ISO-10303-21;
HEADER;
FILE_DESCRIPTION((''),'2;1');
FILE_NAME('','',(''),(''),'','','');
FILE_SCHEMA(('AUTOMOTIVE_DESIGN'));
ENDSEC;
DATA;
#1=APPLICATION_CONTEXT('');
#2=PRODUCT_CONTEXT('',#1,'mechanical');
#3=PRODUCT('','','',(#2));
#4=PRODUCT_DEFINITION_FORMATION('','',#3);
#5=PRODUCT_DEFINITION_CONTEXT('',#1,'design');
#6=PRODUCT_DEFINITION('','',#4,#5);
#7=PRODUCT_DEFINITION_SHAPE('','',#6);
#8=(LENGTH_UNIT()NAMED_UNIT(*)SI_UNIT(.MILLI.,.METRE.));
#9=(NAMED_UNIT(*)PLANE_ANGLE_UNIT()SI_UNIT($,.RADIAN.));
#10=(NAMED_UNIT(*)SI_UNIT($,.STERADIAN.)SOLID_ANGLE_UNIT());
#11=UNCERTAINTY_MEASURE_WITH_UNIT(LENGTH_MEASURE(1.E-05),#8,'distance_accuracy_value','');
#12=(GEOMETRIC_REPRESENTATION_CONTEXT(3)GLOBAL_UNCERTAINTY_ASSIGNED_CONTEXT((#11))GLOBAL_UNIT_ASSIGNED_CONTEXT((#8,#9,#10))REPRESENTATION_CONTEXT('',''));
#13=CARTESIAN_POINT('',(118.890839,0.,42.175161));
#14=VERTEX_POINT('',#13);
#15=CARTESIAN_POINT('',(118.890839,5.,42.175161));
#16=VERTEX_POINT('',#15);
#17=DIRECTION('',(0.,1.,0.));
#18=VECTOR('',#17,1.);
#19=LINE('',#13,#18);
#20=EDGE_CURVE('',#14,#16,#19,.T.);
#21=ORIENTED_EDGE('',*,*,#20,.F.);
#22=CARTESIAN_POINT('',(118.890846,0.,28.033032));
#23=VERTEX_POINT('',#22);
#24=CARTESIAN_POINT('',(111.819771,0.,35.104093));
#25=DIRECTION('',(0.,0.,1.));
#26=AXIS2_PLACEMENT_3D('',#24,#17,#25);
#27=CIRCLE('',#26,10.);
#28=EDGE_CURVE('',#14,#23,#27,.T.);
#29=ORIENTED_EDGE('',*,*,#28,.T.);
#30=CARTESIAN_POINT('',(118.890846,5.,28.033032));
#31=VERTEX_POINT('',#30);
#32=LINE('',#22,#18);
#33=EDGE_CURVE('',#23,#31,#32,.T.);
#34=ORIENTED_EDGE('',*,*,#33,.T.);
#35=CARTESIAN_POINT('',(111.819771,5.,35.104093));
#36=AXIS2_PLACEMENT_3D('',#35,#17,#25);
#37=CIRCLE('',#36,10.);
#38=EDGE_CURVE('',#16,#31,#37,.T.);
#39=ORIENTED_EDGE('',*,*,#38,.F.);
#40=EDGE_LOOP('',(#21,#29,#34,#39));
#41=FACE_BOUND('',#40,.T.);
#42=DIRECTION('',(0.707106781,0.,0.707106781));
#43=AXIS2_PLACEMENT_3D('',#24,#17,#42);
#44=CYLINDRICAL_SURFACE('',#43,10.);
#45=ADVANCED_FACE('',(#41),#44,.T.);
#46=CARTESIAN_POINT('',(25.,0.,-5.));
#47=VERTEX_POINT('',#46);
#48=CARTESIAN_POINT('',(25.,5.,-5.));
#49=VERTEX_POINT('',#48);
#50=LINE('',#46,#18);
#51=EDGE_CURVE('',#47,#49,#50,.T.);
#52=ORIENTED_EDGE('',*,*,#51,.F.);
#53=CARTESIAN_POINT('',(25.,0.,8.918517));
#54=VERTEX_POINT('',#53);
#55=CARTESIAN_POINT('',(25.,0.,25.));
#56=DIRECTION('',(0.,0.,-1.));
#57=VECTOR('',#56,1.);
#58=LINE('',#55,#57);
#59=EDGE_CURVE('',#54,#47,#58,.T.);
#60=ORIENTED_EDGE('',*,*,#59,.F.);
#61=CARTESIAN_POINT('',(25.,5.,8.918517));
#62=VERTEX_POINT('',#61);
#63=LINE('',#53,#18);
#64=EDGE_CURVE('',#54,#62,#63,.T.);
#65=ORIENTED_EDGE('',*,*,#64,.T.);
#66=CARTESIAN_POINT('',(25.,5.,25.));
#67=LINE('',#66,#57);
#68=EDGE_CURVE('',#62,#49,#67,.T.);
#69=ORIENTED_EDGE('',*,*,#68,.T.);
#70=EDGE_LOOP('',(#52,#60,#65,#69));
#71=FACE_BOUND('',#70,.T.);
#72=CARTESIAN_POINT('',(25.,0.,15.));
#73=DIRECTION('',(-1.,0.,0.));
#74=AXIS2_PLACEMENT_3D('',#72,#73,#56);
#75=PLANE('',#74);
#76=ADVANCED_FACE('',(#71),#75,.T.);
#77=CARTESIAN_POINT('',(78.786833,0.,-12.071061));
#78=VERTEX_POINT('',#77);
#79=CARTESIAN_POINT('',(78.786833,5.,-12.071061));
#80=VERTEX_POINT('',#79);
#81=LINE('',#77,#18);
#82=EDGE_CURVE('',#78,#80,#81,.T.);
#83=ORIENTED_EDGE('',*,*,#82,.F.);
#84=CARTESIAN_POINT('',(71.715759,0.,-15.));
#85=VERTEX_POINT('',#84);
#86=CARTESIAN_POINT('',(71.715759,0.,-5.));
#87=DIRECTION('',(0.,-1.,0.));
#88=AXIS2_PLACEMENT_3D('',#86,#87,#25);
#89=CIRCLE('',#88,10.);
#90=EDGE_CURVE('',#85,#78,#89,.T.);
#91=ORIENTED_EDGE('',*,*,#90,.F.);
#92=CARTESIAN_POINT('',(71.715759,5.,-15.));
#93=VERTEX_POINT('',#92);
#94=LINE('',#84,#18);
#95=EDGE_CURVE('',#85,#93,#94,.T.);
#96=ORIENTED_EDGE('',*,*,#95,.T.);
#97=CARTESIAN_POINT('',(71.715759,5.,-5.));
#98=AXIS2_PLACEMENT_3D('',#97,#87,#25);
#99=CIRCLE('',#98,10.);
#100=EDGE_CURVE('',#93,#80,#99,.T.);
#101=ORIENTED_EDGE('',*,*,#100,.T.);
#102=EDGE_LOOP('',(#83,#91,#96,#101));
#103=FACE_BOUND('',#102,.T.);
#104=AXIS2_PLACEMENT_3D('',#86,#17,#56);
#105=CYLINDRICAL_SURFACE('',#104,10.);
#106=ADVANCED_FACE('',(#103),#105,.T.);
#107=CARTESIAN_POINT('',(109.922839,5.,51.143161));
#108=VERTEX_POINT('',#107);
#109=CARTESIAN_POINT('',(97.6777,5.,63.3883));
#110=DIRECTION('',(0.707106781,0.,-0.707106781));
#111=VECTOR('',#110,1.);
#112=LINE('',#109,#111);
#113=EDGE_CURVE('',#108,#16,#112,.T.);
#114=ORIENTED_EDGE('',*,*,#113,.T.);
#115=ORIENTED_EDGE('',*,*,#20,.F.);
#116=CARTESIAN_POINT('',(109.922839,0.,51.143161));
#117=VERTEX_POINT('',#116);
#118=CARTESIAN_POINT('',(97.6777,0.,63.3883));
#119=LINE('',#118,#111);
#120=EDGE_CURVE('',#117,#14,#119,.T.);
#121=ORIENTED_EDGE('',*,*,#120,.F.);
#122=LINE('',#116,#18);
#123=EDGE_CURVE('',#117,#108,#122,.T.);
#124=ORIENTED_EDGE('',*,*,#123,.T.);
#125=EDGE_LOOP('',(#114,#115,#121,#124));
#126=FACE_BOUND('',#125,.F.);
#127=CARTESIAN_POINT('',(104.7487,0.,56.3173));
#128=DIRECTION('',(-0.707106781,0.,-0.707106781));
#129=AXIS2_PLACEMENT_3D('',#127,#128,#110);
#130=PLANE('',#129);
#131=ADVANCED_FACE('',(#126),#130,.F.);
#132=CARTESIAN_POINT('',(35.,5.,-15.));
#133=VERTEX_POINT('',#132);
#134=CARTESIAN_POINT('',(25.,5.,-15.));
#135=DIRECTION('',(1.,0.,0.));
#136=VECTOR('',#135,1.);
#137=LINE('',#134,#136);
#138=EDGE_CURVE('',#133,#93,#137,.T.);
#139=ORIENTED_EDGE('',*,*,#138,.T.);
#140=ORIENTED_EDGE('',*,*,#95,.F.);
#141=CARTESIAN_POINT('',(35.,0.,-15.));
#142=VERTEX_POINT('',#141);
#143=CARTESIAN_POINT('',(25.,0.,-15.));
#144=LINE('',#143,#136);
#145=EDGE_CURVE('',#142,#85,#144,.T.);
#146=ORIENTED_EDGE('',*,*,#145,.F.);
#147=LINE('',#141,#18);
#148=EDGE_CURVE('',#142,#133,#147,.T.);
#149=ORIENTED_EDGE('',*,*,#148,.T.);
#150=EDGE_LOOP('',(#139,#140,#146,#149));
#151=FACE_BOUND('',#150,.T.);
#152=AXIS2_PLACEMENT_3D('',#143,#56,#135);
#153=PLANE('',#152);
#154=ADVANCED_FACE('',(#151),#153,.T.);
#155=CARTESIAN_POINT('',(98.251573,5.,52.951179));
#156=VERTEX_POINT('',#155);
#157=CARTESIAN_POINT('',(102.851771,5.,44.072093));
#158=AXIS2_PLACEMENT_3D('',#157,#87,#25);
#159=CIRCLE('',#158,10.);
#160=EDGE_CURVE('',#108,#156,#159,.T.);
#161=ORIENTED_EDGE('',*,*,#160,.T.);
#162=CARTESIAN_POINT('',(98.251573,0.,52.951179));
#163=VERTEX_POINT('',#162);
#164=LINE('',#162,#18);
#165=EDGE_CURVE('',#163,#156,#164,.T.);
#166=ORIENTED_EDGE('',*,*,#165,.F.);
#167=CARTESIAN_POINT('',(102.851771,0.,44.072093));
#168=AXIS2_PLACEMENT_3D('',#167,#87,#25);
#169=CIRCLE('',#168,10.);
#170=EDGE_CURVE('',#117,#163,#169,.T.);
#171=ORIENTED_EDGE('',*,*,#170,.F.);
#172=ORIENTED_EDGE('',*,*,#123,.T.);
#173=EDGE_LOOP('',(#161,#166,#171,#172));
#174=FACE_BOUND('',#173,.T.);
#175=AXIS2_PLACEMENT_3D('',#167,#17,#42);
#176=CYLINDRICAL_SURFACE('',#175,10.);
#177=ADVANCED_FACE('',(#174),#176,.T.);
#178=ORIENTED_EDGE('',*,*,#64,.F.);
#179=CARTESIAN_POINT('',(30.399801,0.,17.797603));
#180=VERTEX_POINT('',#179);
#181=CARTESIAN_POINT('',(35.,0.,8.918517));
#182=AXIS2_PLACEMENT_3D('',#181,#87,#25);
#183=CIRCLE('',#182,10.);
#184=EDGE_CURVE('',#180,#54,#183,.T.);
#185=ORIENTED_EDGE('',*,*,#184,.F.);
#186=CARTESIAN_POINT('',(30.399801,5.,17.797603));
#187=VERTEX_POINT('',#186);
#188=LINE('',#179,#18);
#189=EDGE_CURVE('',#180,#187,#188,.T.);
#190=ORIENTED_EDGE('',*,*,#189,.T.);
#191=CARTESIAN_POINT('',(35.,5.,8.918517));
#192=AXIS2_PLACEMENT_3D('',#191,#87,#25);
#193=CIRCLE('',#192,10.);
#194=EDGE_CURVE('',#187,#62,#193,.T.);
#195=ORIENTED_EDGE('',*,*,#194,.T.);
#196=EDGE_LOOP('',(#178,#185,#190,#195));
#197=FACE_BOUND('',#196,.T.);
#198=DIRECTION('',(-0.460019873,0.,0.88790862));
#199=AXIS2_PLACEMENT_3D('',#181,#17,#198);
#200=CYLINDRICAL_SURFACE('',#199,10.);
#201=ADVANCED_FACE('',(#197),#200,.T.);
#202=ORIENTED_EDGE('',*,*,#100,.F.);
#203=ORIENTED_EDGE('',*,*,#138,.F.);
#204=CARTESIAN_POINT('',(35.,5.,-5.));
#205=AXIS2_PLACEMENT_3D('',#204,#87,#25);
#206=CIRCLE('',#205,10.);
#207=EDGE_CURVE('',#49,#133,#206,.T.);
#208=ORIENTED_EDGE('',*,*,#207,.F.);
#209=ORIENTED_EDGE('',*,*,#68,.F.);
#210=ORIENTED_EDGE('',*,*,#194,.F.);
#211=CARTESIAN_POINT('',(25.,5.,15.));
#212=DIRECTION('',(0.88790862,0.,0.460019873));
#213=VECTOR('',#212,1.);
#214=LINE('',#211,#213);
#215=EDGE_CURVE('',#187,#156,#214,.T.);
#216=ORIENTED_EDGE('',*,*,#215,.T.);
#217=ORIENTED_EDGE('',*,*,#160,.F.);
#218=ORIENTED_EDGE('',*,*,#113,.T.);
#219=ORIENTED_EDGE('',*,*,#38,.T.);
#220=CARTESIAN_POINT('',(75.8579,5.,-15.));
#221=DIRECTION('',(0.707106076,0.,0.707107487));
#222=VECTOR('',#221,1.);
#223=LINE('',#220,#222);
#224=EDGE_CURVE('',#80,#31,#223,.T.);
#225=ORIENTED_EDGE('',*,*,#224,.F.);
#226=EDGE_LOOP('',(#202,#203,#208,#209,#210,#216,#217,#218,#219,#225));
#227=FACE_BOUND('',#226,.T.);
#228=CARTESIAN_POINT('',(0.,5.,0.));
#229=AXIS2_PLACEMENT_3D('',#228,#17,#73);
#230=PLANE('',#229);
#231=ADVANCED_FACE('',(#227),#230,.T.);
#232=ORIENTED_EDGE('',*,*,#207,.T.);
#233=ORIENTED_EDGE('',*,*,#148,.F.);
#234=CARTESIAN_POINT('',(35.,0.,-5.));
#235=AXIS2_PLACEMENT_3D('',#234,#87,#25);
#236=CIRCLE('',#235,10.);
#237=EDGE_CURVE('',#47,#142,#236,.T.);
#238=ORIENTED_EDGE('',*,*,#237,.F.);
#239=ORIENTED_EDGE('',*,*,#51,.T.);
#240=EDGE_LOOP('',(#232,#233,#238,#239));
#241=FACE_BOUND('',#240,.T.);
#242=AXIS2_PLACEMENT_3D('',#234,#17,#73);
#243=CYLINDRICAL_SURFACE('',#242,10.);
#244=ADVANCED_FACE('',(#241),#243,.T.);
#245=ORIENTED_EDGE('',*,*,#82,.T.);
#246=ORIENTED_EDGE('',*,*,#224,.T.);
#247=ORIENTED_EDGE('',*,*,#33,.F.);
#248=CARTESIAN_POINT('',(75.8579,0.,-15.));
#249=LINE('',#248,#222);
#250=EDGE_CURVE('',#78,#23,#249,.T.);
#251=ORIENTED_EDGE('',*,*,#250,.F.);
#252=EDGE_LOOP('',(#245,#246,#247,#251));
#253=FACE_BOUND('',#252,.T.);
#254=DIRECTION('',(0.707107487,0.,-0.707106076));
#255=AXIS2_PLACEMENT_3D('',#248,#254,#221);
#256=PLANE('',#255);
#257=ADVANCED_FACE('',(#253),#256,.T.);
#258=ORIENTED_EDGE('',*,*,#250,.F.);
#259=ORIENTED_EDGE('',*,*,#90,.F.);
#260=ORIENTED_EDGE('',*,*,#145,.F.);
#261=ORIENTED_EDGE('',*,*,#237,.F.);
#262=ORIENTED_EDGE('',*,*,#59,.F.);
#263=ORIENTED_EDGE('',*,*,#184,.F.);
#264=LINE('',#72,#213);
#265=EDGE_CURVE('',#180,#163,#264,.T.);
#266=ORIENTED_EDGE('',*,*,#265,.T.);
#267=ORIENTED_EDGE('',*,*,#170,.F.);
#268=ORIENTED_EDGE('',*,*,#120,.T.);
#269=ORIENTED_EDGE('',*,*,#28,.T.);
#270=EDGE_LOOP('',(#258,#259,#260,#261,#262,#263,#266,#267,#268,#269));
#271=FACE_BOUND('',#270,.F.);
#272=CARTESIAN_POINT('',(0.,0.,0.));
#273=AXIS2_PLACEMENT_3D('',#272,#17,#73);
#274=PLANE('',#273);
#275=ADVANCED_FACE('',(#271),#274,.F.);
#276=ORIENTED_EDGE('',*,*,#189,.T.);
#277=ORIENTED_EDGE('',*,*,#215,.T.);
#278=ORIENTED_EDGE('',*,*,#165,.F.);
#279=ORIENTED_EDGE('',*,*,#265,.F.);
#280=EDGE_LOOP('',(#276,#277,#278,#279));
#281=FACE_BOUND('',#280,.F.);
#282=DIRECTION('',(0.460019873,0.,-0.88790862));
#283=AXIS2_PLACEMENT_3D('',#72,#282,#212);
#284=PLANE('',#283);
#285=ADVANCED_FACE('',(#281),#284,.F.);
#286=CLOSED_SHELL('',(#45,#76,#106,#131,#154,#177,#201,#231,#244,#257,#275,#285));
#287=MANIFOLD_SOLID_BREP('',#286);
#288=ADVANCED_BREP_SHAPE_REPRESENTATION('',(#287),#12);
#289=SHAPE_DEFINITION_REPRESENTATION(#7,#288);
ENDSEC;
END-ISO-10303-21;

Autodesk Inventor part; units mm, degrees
ref_plane "YZ Plane" through (0, 0, 0) normal (1, 0, 0) x (0, 1, 0)
ref_plane "XZ Plane" through (0, 0, 0) normal (0, 1, 0) x (-1, 0, 0)
ref_plane "XY Plane" through (0, 0, 0) normal (0, 0, 1) x (1, 0, 0)
sketch "Sketch1" plane through (0, 0, 0) normal (0, 1, 0) x (-1, 0, 0)
  line L0 (0, 25) -> (0, -25)
  line L1 (0, 25) -> (-59.2893, 25) construction
  line L2 (-59.2893, 25) -> (-143.6396, 109.3503) construction
  line L3 (-143.6396, 109.3503) -> (-178.9949, 73.9949)
  line L4 (-178.9949, 73.9949) -> (-80, -25)
  line L5 (-80, -25) -> (0, -25)
  line L6 (-25, 25) -> (-25, -25)
  line L7 (-97.6777, 63.3883) -> (-133.033, 28.033)
  line L8 (-25, 15) -> (-104.7487, 56.3173)
  line L9 (-25, -15) -> (-75.8579, -15)
  line L10 (-75.8579, -15) -> (-125.9619, 35.1041)
  point P0 (0, 0)
  point P1 (0, 0)
  dimension "d0" = 50
  dimension "d1" = 80
  dimension "d2" = 135
  dimension "d3" = 140
  dimension "d4" = 50
  dimension "d37" = 25
  dimension "d38" = 65
  dimension "d39" = 10
  dimension "d40" = 10
  dimension "d41" = 10
  dimension "d42" = 10
extrude "Plate1" add sketch "Sketch1" along normal blind 5 contours L7 L8 L6 L9 L10
fillet "Corner Round1" radius 10 5 edges at (25, 2.5, -15) (25, 2.5, 15) (104.7487, 2.5, 56.3173) (125.9619, 2.5, 35.1041) (75.8579, 2.5, -15)
equation "\"d4\" = d0"
equation "\"d40\" = d39"
equation "\"d41\" = d39"
equation "\"d42\" = d41"
equation "\"d5\" = Thickness"
equation "\"BendRadius\" = Thickness"
equation "\"BendReliefWidth\" = Thickness"
equation "\"BendReliefDepth\" = 0.5 * Thickness"
equation "\"TransitionRadius\" = BendRadius"
equation "\"JacobiRadiusSize\" = BendRadius"
equation "\"GapSize\" = Thickness"
equation "\"Thickness\" = 5"
properties part number "PWTR-0089" material "Stainless Steel"
